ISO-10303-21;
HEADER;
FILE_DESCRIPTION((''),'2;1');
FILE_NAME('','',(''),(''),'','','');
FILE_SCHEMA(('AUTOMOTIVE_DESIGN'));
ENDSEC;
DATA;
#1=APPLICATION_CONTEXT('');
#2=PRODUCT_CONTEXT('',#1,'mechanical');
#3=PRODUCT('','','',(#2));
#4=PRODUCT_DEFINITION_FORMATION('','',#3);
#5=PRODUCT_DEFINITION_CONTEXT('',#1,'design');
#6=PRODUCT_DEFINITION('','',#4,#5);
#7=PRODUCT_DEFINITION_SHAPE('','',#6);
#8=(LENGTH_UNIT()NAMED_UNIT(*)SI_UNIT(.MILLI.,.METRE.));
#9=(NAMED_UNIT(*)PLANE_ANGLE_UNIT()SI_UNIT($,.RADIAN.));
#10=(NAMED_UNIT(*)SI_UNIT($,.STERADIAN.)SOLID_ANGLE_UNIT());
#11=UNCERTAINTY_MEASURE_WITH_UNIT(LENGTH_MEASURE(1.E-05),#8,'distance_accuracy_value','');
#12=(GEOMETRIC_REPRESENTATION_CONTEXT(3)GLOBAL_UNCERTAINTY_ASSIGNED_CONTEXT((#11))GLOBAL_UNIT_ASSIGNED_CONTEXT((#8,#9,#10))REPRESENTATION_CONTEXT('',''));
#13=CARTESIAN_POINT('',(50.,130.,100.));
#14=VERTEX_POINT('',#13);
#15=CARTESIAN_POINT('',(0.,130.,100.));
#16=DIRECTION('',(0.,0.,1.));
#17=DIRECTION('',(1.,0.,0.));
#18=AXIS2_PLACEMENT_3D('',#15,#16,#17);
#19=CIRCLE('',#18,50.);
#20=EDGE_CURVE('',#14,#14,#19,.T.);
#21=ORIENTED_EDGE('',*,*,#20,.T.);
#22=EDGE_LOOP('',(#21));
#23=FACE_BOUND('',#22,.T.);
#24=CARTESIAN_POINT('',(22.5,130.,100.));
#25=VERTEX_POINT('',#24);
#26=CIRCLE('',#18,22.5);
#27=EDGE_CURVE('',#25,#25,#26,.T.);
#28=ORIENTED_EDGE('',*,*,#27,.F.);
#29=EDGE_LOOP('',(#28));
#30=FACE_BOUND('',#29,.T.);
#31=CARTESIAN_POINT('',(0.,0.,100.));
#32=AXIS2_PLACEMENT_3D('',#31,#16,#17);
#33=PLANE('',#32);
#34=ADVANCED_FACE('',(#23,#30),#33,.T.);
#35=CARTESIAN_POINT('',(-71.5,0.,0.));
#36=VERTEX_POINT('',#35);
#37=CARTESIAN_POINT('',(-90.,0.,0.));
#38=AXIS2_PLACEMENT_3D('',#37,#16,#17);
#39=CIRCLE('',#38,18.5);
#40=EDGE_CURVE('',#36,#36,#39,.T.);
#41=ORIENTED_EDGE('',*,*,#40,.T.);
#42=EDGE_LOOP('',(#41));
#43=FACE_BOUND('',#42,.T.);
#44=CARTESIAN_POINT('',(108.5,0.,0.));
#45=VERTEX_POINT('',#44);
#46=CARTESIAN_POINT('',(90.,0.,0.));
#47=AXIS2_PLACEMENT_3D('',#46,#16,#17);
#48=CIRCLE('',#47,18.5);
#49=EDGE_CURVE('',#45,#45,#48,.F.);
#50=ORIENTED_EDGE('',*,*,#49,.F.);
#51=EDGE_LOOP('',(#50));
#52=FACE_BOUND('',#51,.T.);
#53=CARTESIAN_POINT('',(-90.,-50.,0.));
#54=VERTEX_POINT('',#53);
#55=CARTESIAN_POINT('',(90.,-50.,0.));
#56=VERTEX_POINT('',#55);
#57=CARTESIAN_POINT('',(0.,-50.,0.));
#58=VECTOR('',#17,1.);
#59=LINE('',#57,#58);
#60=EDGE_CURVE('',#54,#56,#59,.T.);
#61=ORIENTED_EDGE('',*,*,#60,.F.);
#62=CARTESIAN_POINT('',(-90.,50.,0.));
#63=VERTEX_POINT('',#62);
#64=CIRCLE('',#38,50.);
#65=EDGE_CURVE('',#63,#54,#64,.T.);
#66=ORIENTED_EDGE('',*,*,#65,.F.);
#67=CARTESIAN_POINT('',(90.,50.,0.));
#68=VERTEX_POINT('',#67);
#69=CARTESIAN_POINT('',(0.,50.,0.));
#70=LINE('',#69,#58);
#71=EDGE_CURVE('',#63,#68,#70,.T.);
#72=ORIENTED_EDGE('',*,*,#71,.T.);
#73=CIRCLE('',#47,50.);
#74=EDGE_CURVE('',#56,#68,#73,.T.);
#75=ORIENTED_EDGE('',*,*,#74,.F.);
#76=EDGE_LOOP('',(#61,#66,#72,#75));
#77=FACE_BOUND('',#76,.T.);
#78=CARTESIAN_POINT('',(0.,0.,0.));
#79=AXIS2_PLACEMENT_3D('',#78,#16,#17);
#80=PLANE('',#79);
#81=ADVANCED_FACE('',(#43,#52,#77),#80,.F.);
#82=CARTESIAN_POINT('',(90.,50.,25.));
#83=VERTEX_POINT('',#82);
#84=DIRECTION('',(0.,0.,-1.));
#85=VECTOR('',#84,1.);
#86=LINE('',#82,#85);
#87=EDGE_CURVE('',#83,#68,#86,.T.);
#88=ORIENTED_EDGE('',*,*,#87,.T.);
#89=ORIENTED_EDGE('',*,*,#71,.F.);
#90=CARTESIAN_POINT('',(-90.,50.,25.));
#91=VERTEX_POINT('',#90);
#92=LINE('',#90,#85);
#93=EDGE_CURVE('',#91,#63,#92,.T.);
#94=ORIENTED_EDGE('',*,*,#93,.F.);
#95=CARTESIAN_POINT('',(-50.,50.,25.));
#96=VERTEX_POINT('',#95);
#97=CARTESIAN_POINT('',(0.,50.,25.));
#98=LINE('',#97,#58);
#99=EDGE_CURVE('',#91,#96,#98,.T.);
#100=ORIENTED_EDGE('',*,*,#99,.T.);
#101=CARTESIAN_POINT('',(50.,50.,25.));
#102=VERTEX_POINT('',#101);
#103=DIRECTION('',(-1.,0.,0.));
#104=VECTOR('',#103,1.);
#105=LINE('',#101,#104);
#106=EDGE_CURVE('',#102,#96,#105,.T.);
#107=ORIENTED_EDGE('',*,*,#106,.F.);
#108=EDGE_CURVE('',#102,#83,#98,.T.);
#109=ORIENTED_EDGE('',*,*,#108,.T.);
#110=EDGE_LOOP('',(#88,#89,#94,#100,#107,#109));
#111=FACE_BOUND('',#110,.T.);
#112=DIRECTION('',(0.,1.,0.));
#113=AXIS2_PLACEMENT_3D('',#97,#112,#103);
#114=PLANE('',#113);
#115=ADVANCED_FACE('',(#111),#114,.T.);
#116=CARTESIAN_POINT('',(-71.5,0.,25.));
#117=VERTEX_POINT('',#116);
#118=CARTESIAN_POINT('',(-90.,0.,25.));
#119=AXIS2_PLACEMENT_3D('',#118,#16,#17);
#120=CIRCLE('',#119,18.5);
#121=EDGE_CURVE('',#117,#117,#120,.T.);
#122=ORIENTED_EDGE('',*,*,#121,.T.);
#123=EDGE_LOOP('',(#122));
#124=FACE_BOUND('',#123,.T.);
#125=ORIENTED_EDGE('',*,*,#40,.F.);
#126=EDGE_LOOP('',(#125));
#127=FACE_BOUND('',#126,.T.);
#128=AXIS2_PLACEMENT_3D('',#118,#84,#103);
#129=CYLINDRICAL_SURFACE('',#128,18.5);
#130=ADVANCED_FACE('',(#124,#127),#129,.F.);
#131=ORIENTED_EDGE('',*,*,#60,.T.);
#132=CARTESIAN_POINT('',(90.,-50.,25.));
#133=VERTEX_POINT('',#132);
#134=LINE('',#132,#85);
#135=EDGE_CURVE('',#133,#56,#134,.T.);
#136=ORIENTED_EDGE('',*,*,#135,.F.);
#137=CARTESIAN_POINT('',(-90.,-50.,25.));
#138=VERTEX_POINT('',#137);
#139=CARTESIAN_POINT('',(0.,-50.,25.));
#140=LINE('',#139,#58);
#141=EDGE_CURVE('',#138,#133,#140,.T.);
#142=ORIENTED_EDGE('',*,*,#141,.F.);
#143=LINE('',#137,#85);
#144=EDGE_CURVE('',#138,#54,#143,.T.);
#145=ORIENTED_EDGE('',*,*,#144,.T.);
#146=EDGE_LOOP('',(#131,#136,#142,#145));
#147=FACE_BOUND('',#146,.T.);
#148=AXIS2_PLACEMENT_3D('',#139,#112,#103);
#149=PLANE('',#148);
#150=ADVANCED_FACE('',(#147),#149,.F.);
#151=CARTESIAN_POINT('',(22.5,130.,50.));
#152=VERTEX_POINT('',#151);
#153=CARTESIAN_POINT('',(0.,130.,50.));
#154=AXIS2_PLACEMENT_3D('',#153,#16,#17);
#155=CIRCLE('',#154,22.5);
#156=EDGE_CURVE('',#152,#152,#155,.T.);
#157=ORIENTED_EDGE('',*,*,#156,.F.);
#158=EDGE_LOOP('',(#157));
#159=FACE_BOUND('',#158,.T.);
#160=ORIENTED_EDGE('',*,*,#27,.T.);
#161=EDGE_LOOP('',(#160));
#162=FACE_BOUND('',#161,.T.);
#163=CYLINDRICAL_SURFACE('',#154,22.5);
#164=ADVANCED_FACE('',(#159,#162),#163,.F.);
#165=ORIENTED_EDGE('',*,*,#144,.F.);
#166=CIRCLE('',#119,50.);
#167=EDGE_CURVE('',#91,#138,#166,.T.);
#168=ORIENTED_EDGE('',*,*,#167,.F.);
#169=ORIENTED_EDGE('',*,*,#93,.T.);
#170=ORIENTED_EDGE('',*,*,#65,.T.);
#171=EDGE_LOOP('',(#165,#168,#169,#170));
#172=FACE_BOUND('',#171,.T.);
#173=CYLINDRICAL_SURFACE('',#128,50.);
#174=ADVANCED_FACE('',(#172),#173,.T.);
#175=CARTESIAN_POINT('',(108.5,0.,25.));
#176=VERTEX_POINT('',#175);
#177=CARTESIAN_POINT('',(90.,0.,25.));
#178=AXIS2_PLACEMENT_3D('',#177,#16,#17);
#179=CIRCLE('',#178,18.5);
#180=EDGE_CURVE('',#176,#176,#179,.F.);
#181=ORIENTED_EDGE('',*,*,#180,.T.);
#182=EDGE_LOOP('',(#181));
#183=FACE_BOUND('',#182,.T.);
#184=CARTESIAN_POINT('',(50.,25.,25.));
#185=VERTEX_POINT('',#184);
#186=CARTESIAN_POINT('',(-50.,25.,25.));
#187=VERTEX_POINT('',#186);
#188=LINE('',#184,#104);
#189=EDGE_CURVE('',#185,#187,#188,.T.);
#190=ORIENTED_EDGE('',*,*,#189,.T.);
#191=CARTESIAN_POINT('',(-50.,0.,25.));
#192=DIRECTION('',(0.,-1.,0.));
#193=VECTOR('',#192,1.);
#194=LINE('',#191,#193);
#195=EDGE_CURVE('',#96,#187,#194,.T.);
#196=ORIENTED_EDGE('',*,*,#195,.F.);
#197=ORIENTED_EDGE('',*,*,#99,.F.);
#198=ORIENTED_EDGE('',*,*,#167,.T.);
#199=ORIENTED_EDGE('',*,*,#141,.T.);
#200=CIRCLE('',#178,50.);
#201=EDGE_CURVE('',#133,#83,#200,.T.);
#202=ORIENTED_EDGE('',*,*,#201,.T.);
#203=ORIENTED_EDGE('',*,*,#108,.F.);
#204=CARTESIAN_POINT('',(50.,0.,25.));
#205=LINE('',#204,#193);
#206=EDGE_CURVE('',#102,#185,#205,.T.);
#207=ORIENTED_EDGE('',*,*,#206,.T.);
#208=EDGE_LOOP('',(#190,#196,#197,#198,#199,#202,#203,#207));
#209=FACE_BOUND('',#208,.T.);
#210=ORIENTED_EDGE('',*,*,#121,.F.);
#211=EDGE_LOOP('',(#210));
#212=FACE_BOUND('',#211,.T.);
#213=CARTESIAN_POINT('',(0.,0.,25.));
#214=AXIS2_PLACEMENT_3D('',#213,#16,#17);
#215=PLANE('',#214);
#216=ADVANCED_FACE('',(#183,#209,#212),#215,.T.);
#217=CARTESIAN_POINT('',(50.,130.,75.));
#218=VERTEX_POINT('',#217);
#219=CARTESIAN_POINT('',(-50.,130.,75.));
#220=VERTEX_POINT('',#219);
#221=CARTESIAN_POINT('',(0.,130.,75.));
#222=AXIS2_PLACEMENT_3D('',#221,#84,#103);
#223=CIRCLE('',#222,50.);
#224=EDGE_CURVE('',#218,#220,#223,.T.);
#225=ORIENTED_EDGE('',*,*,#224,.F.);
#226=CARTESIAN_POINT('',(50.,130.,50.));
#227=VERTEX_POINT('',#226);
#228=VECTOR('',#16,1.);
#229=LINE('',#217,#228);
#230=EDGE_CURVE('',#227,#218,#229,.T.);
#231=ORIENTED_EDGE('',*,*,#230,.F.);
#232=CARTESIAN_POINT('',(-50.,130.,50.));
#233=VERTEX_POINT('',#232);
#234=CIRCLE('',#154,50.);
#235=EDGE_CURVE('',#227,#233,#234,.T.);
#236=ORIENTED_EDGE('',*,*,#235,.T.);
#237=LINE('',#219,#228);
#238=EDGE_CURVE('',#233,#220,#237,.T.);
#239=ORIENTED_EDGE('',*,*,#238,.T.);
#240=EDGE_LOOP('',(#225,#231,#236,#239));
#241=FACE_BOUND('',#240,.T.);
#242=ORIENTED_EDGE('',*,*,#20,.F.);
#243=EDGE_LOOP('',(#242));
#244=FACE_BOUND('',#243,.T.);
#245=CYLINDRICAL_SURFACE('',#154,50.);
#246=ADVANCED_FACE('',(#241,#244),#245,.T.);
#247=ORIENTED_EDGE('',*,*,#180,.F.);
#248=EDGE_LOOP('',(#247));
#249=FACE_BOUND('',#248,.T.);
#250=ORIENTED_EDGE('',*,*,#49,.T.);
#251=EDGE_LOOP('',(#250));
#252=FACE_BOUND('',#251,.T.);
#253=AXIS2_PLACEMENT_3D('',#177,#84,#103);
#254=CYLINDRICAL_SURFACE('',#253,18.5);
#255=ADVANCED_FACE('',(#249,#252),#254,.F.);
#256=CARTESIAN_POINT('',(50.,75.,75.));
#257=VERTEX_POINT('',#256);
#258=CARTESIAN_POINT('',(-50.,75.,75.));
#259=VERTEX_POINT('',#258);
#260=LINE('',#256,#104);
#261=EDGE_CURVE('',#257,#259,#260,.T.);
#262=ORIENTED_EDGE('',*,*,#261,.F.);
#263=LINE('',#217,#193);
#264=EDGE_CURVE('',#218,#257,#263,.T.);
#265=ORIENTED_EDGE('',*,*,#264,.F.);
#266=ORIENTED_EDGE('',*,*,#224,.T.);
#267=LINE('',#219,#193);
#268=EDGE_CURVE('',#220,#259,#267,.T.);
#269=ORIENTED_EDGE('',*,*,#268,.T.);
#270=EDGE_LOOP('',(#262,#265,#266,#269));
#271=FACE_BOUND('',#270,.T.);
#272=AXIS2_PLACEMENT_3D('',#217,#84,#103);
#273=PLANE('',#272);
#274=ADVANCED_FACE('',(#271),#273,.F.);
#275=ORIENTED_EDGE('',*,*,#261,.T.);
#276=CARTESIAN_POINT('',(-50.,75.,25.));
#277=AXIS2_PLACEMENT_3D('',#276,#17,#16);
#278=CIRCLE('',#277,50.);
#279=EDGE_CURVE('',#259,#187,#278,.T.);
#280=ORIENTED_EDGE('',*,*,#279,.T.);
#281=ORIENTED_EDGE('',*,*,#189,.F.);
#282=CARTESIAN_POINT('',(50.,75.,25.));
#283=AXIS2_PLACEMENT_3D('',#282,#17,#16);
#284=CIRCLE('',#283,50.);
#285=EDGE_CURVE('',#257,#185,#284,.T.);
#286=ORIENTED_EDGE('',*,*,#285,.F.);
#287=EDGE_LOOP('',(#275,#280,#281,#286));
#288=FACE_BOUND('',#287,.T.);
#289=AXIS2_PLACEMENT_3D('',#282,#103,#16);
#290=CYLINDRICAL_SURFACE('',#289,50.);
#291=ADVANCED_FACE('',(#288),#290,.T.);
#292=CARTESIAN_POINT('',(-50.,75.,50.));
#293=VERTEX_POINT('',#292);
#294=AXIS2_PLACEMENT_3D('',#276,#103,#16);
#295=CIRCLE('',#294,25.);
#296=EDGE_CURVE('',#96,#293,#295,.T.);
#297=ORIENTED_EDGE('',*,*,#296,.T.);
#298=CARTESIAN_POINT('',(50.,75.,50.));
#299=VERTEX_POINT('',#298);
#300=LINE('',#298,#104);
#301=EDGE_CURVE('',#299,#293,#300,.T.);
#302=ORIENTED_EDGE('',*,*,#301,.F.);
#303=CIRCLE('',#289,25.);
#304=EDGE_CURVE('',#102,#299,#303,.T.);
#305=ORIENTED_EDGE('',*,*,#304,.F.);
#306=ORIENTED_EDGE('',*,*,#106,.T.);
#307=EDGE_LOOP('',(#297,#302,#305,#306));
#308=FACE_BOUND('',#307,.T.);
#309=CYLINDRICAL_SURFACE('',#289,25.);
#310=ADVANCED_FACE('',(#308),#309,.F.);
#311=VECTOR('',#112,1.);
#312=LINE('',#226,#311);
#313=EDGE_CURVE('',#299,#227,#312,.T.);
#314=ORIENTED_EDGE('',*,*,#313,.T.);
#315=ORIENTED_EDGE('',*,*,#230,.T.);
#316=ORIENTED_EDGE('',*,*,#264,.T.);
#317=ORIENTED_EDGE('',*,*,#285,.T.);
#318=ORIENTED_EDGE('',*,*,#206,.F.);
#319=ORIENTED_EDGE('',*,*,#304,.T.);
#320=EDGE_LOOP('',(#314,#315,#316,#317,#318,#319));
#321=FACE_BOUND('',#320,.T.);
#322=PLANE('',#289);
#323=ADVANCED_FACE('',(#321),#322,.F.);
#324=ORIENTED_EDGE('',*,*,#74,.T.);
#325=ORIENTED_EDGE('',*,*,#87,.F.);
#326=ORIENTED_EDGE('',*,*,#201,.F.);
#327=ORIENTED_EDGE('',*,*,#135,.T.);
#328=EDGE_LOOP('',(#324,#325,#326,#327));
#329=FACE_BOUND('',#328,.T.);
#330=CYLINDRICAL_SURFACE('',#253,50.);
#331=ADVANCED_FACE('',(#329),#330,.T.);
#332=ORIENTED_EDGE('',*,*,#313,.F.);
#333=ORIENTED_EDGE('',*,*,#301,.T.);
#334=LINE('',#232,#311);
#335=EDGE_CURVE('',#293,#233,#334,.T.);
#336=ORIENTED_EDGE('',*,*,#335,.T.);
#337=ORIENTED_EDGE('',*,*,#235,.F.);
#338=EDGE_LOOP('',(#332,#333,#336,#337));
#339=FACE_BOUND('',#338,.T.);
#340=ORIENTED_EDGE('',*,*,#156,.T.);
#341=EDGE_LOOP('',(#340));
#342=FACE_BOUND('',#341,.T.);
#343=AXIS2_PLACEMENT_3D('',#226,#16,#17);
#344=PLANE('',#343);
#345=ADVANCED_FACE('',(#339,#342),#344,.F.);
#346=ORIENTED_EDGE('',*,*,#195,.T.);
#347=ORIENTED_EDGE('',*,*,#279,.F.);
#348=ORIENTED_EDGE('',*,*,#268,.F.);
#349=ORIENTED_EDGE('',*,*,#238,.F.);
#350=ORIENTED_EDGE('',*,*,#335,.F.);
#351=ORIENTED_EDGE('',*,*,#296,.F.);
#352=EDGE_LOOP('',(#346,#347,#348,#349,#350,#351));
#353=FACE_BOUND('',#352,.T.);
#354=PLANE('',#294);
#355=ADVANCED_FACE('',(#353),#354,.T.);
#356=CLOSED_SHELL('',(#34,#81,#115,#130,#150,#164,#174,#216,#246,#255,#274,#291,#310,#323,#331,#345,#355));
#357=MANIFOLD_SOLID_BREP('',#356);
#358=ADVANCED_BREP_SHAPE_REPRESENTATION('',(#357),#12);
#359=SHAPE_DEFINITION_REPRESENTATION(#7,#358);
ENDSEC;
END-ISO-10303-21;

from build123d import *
from build123d.topology import SkipClean

# Parameters (mm, degrees)
SKETCH1_R           = 18.5
BOSS_EXTRUDE1_DEPTH = 25
BOSS_EXTRUDE2_START = 100
SKETCH1_3_R         = 50
SKETCH1_3_R_2       = 22.5
BOSS_EXTRUDE2_DEPTH = 50
BOSS_EXTRUDE3_DEPTH = 50
CUT_EXTRUDE1_DEPTH  = 241.052077683


with BuildPart() as part:
    # Sketch1 → Boss-Extrude1 (new body)
    with BuildSketch(Plane.XY):
        with BuildLine():
            Line((-90, -50), (90, -50))
            ThreePointArc((90, -50), (140, 0), (90, 50))
            Line((90, 50), (-90, 50))
            ThreePointArc((-90, 50), (-140, 0), (-90, -50))
        make_face()
        with Locations((-90, 0)):
            Circle(SKETCH1_R, mode=Mode.SUBTRACT)
        with Locations((90, 0)):
            Circle(SKETCH1_R, mode=Mode.SUBTRACT)
    extrude(amount=BOSS_EXTRUDE1_DEPTH)



with BuildPart() as body_2:
    # Sketch1<3> → Boss-Extrude2 (new body)
    with BuildSketch(Plane.XY.offset(BOSS_EXTRUDE2_START)):
        with Locations((0, 130)):
            Circle(SKETCH1_3_R)
        with Locations((0, 130)):
            Circle(SKETCH1_3_R_2, mode=Mode.SUBTRACT)
    extrude(amount=-BOSS_EXTRUDE2_DEPTH)


with BuildPart() as part_1:
    add(part.part)

    add(body_2.part)  # Boss-Extrude3 merges body 2
    # Sketch2 → Boss-Extrude3 (add, symmetric)
    with BuildSketch(Plane(origin=(0, 0, 0), x_dir=(0, 0, -1), z_dir=(1, 0, 0))):
        with BuildLine():
            Line((-50, 130), (-50, 75))
            ThreePointArc((-50, 75), (-42.67766953, 57.32233047), (-25, 50))
            Line((-25, 50), (-12.5, 50))
            Line((-12.5, 50), (-12.5, 25))
            Line((-12.5, 25), (-25, 25))
            ThreePointArc((-25, 25), (-60.355339059, 39.644660941), (-75, 75))
            Line((-75, 75), (-75, 130))
            Line((-75, 130), (-50, 130))
        make_face()
    extrude(amount=BOSS_EXTRUDE3_DEPTH, both=True)

    # Sketch3 → Cut-Extrude1 (cut, through all)
    with SkipClean():  # the faces are left unmerged after this step: merging them gives an invalid solid
        with BuildSketch(Plane.XY.offset(75)):
            with BuildLine():
                Line((22.5, 130), (-22.5, 130))
                ThreePointArc((-22.5, 130), (0, 107.5), (22.5, 130))
            make_face()
        extrude(amount=-CUT_EXTRUDE1_DEPTH, mode=Mode.SUBTRACT)
    add(part_1.part.scale(1), mode=Mode.REPLACE)  # the faces are merged on a copy


solid = part_1.part
